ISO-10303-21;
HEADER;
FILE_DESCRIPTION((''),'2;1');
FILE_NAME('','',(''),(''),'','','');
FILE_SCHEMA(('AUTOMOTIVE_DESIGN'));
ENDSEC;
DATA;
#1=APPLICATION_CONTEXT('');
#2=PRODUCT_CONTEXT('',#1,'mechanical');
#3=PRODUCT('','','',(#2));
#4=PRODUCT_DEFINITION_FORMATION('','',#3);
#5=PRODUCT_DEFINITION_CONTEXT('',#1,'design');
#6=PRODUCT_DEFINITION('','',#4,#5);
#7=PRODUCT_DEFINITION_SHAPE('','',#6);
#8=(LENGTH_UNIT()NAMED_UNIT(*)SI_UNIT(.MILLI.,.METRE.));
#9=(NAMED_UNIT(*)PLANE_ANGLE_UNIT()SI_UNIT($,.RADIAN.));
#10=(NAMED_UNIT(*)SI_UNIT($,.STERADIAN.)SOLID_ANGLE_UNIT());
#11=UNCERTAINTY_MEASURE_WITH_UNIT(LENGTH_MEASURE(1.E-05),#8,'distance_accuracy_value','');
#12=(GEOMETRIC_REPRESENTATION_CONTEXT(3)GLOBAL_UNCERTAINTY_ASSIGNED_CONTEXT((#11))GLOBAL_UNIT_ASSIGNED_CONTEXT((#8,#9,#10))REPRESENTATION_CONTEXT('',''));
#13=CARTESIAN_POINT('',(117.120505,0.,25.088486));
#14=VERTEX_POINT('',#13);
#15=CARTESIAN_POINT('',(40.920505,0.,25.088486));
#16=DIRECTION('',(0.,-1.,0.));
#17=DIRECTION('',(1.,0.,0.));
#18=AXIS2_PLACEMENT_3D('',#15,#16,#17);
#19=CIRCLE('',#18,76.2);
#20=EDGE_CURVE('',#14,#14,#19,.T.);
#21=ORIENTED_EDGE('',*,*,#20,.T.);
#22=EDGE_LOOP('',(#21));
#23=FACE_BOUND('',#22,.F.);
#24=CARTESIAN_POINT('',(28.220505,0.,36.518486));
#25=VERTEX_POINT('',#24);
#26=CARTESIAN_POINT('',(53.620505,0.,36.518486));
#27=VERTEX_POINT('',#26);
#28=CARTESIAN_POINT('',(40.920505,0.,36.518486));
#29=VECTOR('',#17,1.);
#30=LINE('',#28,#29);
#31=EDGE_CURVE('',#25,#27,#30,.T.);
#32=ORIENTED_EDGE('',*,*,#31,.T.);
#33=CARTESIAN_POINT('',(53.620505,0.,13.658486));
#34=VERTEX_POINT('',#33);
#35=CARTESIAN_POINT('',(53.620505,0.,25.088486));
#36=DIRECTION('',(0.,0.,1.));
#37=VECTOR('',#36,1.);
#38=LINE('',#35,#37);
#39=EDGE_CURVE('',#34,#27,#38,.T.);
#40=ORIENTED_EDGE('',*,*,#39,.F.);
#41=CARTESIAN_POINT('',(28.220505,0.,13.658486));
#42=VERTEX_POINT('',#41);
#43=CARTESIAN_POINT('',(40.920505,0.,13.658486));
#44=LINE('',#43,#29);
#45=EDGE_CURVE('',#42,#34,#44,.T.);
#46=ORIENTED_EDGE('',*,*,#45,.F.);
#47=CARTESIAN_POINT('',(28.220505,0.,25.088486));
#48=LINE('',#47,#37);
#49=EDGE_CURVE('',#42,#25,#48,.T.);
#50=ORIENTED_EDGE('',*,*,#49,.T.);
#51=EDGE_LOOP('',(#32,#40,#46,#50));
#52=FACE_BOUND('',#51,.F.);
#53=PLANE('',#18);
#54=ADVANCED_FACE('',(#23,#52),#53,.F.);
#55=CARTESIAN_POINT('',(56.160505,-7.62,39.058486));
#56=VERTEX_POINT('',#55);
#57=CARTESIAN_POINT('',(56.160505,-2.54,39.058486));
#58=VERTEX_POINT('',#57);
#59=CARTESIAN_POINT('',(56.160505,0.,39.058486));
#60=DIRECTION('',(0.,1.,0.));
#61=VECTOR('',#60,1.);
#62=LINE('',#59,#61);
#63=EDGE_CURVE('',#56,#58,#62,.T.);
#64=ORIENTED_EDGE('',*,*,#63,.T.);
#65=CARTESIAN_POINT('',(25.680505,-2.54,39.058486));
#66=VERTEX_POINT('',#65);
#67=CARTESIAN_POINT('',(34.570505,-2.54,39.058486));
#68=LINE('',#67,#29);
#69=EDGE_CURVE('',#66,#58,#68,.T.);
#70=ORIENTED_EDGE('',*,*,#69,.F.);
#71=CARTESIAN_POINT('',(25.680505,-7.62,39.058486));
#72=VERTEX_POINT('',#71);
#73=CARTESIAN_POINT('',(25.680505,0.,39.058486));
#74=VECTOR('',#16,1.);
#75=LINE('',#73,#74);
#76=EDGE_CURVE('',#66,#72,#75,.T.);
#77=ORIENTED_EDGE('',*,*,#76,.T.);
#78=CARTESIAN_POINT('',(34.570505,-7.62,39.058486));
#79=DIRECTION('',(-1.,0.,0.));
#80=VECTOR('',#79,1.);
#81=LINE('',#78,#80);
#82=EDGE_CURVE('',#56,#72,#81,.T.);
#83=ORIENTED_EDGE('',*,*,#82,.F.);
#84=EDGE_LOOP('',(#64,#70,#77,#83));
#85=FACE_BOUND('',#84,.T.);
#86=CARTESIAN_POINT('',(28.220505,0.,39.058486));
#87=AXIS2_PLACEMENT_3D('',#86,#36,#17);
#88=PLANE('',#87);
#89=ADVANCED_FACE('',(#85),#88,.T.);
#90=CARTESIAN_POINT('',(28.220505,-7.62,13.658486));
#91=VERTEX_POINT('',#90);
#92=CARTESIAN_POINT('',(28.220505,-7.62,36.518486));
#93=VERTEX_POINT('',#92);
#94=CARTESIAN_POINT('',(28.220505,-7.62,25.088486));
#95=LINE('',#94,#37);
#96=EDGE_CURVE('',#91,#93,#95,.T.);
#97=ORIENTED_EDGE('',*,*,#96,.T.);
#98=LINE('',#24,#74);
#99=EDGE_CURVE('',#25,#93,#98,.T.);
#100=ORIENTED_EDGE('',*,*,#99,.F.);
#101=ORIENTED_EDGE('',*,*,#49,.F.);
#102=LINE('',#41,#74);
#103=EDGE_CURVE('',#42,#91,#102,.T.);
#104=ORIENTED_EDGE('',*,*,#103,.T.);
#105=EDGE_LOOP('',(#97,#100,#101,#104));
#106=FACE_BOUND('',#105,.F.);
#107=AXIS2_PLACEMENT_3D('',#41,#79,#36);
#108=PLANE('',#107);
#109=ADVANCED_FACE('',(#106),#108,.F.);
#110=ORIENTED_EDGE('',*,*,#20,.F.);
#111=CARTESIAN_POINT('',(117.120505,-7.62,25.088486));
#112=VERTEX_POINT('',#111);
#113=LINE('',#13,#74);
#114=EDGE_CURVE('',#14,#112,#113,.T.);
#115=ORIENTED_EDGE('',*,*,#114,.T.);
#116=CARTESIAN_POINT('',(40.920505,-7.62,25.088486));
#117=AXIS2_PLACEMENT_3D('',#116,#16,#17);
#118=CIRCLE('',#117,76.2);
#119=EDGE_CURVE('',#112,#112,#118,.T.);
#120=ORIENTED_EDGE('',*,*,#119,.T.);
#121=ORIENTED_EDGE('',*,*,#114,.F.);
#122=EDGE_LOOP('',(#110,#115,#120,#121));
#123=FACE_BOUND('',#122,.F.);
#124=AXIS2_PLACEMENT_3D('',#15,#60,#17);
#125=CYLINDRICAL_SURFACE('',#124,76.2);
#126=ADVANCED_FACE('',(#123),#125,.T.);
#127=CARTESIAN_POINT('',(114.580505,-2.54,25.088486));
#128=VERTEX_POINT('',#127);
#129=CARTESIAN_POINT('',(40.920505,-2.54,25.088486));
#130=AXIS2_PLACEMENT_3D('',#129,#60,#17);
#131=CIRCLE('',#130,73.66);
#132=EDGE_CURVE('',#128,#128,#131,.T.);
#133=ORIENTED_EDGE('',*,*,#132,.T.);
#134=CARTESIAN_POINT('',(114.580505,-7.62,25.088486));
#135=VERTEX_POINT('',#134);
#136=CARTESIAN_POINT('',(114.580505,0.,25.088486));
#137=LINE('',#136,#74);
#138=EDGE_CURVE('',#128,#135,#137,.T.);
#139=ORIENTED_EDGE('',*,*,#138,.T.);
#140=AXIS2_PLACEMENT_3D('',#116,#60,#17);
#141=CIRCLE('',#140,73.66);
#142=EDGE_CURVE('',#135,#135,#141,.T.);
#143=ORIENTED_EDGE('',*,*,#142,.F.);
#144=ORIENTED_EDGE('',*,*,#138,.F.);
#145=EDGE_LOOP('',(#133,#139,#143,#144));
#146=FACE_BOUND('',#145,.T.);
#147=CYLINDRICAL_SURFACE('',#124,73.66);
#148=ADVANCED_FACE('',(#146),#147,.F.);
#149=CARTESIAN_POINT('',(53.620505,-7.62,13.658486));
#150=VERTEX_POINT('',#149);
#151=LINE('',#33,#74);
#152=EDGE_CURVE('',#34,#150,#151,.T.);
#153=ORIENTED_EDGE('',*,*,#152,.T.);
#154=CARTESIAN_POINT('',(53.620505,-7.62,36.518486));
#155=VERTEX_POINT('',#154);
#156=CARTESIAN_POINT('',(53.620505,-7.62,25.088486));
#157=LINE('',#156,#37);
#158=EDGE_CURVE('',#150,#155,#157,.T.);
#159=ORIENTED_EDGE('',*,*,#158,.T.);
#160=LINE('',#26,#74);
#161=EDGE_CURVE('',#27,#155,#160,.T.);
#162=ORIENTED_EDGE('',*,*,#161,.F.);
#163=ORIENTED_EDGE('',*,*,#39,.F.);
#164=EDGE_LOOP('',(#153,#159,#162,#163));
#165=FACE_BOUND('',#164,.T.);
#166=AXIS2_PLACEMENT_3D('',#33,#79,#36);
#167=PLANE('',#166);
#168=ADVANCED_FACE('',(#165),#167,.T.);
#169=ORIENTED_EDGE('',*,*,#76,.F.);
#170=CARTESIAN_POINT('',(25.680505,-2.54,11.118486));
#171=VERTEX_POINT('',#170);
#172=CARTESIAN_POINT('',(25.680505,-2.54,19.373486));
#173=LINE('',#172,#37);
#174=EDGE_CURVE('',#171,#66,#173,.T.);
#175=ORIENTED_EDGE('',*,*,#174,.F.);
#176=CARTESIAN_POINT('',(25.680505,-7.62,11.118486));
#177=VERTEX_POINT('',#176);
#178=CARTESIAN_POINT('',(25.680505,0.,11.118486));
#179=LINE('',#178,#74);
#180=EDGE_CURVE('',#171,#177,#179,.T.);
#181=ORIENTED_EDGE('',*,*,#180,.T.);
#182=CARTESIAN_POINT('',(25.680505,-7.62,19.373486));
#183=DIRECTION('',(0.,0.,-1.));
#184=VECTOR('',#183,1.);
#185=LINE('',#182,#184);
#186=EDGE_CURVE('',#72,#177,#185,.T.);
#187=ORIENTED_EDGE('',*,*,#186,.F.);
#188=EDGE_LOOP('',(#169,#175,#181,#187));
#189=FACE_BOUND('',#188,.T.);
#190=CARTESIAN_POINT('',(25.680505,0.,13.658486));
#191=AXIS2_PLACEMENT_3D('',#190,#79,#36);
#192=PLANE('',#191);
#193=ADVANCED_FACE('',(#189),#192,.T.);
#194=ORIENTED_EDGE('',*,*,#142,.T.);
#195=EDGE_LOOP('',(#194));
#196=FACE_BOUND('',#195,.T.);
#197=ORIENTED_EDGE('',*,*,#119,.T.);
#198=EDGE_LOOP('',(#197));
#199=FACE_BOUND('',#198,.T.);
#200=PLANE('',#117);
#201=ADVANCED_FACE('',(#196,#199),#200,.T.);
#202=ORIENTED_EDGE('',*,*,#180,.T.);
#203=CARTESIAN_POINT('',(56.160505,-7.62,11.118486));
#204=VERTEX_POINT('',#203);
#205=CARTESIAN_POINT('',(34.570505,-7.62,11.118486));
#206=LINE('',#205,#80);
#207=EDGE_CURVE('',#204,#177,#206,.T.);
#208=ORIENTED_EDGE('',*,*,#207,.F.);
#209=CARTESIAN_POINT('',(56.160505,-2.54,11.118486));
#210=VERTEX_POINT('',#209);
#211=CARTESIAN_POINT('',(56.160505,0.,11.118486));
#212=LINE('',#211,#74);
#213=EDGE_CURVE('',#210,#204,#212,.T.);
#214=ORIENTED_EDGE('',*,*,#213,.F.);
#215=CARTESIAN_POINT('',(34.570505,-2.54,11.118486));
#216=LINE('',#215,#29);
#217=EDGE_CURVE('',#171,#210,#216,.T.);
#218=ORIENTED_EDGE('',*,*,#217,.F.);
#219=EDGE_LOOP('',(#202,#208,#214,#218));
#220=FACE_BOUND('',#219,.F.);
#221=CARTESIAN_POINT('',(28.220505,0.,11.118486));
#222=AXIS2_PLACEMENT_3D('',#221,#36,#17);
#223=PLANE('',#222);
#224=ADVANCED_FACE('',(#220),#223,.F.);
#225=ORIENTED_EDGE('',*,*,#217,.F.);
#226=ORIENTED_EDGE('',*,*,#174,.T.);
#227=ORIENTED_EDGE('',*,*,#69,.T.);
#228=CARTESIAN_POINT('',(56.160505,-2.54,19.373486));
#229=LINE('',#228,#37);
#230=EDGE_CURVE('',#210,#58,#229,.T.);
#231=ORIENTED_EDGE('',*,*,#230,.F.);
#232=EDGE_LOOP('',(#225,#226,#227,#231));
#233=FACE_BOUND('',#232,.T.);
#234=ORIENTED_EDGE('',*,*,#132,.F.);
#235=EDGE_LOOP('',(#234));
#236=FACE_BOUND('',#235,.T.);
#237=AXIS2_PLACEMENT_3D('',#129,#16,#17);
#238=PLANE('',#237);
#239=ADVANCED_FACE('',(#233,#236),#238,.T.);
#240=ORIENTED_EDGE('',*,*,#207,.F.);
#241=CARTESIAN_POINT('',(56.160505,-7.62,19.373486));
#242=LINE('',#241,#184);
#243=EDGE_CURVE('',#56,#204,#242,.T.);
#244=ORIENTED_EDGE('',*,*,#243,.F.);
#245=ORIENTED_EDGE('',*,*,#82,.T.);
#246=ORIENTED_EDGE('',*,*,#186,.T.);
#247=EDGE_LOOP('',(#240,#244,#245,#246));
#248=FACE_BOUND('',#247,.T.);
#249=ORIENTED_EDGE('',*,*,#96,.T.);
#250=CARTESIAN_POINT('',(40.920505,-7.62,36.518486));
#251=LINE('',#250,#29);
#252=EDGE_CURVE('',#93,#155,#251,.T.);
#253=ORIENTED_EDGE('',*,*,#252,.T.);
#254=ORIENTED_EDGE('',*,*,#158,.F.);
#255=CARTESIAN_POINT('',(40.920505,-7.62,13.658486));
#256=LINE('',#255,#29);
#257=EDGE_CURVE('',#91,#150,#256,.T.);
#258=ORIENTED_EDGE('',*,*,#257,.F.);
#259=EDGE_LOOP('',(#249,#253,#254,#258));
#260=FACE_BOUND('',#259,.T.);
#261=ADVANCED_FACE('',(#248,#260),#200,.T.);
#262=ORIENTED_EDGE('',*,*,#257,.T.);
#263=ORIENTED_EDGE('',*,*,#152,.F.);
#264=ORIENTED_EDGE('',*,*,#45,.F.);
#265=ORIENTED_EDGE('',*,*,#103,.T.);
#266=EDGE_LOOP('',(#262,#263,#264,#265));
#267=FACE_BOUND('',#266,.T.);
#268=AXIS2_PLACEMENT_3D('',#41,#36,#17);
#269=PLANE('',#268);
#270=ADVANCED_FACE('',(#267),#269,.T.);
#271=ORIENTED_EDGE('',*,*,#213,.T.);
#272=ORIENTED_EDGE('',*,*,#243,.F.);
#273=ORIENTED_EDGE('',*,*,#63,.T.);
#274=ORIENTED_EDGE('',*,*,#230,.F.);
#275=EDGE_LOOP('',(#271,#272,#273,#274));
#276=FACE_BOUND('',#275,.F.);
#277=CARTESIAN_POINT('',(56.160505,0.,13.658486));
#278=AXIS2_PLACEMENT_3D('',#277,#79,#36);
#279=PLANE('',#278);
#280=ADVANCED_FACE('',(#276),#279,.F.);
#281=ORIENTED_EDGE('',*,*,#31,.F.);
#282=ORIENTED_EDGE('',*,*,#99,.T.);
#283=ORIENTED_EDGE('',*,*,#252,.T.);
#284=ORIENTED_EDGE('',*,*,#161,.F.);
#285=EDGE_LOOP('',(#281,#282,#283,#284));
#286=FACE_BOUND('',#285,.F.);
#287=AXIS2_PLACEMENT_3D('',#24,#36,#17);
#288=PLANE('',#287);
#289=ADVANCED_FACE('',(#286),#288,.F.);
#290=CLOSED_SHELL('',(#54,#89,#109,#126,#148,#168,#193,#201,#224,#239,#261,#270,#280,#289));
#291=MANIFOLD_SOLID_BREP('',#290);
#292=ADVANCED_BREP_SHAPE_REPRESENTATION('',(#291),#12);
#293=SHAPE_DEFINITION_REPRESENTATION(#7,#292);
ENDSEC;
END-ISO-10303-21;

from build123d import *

# Parameters (mm, degrees)
F0_R     = 76.2
F0_W     = 25.4
F0_H     = 22.86
F1_DEPTH = 7.62
F3_T     = -2.54


# Not quite as in the source:
# - the program builds the solid bodies; features that only make, move or delete a surface that nothing else refers to are left out


with BuildPart() as f1:
    # F0 (on Front) → F1 (new body)
    with BuildSketch(Plane.XZ):
        with Locations((40.9205045223, 25.0884863067)):
            Circle(F0_R)
        with Locations((40.9205045223, 25.0884863067)):
            Rectangle(F0_W, F0_H, mode=Mode.SUBTRACT)
    extrude(amount=F1_DEPTH)

    # F3
    f3_openings = [f1.faces().sort_by_distance(p)[0] for p in [
        (-33.124234, -7.62, 25.088486),
    ]]
    offset(amount=F3_T, openings=f3_openings, kind=Kind.INTERSECTION)


solid = f1.part
